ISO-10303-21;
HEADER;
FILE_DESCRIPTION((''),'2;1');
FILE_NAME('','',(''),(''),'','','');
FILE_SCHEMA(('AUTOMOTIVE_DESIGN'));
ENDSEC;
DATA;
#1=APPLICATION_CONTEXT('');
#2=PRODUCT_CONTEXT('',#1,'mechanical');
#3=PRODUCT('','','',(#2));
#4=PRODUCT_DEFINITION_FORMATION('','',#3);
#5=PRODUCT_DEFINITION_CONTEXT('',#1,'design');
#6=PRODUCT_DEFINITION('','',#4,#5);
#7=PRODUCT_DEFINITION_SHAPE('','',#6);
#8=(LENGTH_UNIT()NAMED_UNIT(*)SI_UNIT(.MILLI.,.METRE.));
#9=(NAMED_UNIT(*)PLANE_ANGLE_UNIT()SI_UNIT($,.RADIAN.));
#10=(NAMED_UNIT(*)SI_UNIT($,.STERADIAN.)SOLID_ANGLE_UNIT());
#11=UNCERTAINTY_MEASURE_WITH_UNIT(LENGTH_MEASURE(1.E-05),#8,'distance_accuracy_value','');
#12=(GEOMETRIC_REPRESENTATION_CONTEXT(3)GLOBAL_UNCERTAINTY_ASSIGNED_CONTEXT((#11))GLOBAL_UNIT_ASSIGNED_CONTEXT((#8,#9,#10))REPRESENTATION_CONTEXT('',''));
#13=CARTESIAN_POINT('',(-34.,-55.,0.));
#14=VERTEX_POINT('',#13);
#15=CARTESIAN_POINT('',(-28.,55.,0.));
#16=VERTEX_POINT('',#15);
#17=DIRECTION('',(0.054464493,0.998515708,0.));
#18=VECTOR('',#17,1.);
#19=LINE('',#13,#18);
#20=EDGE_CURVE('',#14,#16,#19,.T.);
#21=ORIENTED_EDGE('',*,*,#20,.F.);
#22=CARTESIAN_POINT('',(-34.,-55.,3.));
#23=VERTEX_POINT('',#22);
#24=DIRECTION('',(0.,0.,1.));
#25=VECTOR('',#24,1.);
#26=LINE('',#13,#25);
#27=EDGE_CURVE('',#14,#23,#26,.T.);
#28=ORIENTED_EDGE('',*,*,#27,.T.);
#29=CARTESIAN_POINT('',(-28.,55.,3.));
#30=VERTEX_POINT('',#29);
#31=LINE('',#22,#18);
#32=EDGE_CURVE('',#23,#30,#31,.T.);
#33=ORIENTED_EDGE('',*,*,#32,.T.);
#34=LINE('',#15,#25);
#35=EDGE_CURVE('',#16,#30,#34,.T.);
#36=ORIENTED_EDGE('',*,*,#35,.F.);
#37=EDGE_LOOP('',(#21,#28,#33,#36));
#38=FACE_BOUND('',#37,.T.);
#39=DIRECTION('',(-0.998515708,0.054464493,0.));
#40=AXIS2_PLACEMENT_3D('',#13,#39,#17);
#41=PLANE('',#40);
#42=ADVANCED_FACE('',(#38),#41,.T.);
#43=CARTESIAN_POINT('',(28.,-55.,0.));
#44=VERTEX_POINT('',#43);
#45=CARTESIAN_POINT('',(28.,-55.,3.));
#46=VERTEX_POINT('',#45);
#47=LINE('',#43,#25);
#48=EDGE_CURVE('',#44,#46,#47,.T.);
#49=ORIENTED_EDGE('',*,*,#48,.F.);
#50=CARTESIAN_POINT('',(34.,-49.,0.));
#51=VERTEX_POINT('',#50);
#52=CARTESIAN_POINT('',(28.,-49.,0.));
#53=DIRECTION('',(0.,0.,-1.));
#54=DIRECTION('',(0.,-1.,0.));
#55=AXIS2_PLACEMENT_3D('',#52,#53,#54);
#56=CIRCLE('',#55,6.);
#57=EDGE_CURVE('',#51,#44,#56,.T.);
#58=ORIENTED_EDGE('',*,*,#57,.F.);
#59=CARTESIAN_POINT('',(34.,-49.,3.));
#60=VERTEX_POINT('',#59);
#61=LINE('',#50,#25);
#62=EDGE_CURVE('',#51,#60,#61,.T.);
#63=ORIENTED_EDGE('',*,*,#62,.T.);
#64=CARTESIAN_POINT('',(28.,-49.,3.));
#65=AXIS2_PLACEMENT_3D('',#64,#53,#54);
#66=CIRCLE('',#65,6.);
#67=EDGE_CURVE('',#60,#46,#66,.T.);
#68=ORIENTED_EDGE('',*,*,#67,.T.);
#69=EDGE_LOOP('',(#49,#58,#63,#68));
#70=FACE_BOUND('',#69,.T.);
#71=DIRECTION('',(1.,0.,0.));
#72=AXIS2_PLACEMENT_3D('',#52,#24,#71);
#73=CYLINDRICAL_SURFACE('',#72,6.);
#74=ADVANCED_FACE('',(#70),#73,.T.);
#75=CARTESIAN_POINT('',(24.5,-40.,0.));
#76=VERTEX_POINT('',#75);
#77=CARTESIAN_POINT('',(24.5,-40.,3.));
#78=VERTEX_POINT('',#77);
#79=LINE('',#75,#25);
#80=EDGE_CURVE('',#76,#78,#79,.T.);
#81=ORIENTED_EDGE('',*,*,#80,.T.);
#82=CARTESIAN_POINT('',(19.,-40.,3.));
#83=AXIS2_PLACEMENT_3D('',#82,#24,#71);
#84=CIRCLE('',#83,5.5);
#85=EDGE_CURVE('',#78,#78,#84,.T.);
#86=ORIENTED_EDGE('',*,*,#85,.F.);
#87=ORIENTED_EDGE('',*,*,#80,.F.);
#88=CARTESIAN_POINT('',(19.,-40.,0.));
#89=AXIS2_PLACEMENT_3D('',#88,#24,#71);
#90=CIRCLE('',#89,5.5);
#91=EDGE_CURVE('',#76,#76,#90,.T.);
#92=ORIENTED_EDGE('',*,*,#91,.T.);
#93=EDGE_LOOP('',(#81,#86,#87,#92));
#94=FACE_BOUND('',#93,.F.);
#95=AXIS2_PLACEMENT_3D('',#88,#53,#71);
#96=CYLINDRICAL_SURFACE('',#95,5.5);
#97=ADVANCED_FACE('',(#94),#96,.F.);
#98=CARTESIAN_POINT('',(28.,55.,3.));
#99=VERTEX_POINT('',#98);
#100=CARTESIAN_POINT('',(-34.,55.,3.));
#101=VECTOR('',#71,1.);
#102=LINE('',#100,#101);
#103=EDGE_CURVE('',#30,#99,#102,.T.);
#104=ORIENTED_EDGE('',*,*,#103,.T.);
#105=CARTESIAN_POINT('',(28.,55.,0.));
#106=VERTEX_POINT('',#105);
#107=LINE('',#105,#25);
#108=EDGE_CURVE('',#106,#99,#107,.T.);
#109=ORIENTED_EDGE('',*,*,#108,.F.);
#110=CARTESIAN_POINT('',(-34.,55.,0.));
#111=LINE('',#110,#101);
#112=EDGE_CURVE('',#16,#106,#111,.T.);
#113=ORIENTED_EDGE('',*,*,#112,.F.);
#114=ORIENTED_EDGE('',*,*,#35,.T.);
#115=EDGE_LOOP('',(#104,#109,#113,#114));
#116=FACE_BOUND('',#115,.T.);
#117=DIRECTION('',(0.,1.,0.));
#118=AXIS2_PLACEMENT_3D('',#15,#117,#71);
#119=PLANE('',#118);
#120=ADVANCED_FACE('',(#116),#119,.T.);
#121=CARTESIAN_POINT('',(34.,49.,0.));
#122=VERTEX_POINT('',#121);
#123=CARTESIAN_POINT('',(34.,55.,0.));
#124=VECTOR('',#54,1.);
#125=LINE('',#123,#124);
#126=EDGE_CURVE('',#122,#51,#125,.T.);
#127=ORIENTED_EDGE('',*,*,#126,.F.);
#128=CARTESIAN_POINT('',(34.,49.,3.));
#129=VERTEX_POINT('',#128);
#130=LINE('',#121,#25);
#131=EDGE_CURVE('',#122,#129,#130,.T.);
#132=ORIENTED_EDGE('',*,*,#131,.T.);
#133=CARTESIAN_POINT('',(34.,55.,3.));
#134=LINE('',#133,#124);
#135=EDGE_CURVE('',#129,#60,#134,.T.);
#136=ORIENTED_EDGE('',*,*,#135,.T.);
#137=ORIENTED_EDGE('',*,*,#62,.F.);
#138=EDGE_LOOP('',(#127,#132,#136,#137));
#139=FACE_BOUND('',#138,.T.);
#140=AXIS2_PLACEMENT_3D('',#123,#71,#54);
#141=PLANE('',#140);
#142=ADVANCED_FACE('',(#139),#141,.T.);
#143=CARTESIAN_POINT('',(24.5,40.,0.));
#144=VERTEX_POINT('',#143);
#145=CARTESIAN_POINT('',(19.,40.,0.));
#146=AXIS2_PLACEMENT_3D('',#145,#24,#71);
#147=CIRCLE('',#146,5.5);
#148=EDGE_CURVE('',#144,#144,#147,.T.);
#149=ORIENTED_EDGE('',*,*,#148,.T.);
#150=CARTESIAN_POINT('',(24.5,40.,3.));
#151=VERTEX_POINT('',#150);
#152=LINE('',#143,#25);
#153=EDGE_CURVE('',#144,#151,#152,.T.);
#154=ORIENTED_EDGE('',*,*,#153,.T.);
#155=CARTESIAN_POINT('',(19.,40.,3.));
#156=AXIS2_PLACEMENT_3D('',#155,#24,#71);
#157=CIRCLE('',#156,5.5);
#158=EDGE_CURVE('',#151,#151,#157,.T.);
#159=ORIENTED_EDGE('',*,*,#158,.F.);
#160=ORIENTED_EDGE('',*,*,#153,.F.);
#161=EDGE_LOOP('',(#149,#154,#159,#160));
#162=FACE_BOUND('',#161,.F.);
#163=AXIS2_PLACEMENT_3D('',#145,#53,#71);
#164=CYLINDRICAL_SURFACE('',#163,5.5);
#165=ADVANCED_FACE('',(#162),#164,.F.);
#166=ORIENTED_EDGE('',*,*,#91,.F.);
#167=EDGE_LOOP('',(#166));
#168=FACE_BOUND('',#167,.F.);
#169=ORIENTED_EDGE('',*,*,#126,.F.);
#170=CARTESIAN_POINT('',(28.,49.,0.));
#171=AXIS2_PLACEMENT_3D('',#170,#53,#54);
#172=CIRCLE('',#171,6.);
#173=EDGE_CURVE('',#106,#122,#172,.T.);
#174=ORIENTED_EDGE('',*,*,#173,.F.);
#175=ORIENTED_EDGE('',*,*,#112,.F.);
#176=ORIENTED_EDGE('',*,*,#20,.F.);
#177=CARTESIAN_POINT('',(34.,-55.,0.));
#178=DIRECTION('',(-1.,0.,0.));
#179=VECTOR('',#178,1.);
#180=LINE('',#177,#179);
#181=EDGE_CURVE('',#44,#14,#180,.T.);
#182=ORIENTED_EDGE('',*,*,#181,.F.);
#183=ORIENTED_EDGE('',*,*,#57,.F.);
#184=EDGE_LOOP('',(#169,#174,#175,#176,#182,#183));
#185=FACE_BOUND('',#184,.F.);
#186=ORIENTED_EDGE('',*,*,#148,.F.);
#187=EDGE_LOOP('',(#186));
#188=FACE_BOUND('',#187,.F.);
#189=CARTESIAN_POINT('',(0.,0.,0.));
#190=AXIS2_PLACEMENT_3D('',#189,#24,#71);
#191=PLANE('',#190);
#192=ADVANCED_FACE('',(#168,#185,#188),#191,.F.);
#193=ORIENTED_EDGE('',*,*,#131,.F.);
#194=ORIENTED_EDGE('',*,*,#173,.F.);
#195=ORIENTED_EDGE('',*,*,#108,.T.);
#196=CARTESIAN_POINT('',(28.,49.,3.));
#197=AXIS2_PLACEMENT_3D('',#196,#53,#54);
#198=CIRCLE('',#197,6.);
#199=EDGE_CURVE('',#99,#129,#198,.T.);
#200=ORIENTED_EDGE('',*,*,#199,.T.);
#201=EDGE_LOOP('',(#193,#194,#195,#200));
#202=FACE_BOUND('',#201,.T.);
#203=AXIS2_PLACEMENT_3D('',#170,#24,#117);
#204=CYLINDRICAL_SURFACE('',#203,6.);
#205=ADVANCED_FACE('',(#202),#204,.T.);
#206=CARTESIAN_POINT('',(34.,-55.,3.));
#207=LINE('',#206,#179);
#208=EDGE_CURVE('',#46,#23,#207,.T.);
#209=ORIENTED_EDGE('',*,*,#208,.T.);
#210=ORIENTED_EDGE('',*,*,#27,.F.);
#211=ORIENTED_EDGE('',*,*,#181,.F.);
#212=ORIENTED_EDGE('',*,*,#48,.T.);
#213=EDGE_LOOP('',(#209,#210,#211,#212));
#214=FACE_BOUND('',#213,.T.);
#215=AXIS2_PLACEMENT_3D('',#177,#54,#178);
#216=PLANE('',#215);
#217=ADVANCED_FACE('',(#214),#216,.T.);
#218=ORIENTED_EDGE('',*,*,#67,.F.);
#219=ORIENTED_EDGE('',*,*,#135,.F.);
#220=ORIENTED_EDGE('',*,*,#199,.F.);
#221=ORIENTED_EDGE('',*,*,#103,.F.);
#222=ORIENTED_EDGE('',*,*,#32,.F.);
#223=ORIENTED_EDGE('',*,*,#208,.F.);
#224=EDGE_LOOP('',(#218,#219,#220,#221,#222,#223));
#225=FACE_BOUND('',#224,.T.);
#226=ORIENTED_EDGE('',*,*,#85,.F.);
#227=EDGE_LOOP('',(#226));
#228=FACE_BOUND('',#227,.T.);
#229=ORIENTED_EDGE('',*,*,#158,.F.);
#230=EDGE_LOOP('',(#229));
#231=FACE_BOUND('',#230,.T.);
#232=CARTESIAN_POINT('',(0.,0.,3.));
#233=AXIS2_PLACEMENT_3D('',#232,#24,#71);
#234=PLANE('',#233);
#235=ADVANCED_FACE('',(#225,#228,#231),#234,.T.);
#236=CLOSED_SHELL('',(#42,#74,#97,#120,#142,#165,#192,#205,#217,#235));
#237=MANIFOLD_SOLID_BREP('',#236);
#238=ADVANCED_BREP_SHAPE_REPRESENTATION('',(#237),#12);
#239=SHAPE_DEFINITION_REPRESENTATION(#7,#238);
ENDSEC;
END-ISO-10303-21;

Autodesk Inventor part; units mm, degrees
ref_plane "YZ Plane" through (0, 0, 0) normal (1, 0, 0) x (0, 1, 0)
ref_plane "XZ Plane" through (0, 0, 0) normal (0, 1, 0) x (-1, 0, 0)
ref_plane "XY Plane" through (0, 0, 0) normal (0, 0, 1) x (1, 0, 0)
sketch "Sketch1" plane through (0, 0, 0) normal (0, 0, 1) x (1, 0, 0)
  line L0 (-34, 55) -> (34, 55)
  line L1 (34, 55) -> (34, -55)
  line L2 (34, -55) -> (-34, -55)
  line L3 (-34, -55) -> (-34, 55)
  line L4 (-34, 55) -> (34, -55) construction
  line L5 (34, 55) -> (-34, -55) construction
  line L6 (-34, -19) -> (-34, 19)
  circle A0 centre (19, 40) radius 5.5
  circle A1 centre (19, -40) radius 5.5
  line L7 (0, 0) -> (34, 0) construction
  line L8 (-34, -55) -> (-28, 55)
  dimension "d157" = 68
  dimension "d158" = 110
  dimension "d160" = 80
  dimension "d161" = 11
  dimension "d164" = 15
  dimension "d165" = 6
extrude "Plate3" add sketch "Sketch1" along normal blind 3 contours L0 L1 L2 L8
fillet "Corner Round2" radius 6 2 edges at (34, 55, 1.5) (34, -55, 1.5)
equation "\"BendReliefWidth\" = Thickness"
equation "\"BendReliefDepth\" = 0.5 * Thickness"
equation "\"CornerReliefSize\" = 4 * Thickness"
equation "\"MinimumRemnant\" = 2 * Thickness"
equation "\"GapSize\" = Thickness"
equation "\"Thickness\" = 3"
properties part number "MSC 815 wall inner joint" material "AISI304"
